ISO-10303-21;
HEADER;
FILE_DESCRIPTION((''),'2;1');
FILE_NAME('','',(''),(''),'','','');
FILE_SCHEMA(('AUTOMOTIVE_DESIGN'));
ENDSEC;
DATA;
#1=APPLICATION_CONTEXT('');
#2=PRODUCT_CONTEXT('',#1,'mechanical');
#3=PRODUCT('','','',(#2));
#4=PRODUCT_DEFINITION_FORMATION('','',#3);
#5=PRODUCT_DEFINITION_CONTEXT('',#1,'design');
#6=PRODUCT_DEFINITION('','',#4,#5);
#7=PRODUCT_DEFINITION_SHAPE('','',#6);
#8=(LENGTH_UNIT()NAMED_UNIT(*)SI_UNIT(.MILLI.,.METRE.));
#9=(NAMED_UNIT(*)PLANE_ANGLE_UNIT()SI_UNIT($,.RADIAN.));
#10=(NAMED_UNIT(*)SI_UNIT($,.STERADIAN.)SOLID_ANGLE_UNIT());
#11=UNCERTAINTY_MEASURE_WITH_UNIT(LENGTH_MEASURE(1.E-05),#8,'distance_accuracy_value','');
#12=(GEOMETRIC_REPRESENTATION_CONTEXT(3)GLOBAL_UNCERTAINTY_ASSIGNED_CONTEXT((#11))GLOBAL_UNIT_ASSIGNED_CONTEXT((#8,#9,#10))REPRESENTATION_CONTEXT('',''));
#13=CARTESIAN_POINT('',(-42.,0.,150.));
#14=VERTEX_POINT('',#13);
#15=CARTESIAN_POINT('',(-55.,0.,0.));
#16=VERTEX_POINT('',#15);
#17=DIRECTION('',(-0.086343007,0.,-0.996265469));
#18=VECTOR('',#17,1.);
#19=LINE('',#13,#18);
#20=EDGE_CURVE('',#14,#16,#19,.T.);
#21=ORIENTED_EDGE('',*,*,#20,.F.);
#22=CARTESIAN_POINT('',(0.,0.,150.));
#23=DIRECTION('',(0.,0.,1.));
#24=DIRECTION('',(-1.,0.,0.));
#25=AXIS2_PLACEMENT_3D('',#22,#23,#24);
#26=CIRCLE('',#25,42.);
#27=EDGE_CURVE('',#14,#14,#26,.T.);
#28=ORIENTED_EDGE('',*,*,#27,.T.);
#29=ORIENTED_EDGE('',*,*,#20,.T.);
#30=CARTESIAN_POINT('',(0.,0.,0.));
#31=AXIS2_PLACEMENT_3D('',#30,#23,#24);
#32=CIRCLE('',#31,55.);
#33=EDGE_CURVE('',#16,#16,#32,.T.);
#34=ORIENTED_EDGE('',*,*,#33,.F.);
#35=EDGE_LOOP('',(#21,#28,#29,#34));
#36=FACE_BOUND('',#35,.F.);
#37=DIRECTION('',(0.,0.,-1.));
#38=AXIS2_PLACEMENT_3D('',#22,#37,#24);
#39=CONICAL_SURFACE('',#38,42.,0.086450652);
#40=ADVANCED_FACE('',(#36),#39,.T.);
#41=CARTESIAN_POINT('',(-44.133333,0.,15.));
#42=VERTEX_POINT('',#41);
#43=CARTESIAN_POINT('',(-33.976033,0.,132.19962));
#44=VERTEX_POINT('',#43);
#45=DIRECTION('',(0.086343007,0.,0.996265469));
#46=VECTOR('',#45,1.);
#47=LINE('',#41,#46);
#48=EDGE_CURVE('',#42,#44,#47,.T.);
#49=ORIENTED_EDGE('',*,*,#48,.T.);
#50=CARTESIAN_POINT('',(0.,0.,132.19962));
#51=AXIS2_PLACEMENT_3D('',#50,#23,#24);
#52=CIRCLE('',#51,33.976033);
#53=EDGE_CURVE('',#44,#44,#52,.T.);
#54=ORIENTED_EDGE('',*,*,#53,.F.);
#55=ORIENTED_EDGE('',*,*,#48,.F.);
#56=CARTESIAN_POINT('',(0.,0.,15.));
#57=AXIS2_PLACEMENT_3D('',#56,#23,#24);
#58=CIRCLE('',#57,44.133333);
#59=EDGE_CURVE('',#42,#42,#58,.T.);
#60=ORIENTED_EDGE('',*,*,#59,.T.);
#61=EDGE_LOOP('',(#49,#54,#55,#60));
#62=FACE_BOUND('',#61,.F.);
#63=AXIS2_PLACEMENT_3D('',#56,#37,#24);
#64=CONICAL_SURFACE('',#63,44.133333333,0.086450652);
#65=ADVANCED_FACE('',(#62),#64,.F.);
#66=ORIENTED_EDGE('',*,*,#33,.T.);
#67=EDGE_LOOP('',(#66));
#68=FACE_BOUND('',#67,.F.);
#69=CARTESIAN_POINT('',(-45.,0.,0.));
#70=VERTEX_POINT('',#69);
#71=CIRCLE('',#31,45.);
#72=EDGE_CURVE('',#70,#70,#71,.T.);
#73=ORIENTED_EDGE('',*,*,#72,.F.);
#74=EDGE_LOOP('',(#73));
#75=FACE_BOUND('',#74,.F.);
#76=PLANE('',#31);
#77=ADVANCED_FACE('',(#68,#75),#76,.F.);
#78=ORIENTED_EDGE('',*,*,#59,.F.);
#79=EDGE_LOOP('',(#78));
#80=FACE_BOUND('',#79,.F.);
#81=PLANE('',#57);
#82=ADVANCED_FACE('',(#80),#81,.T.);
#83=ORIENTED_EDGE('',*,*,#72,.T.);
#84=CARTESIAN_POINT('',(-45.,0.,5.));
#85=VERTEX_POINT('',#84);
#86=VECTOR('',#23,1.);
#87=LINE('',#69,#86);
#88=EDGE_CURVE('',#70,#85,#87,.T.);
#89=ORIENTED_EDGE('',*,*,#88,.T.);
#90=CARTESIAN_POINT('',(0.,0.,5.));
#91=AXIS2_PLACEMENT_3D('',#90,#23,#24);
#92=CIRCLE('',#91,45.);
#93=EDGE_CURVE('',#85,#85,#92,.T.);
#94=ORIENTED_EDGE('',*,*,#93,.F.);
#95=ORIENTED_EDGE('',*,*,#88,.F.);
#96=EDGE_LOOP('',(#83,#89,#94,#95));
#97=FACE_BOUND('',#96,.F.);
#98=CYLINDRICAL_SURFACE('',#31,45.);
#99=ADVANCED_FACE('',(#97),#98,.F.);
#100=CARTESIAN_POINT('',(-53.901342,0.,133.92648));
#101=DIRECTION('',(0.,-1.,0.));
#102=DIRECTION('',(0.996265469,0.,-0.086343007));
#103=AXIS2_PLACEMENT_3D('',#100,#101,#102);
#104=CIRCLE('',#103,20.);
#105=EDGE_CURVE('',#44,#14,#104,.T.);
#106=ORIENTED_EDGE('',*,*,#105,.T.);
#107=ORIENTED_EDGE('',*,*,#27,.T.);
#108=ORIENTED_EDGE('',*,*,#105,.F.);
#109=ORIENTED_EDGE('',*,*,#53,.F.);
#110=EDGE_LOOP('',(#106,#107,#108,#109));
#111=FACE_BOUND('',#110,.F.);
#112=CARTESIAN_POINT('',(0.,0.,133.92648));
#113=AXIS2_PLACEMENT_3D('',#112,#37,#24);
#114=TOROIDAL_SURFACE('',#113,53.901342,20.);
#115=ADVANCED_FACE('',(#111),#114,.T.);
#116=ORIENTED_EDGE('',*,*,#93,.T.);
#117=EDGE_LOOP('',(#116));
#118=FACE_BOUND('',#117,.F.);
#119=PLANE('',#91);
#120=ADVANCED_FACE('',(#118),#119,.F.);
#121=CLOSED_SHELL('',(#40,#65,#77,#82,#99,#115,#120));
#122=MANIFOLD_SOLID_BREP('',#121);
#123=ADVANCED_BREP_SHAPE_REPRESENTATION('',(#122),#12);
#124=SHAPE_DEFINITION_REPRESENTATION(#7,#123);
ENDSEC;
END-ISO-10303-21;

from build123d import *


# Not quite as in the source:
# - a fillet or chamfer that OpenCascade refuses, or shapes differently, is made with other operations: its cross-section is extruded or revolved along the edge and cut away or added


with BuildPart() as f1:
    # F0 (on Front) → F1 (revolve)
    with BuildSketch(Plane.XZ):
        Polygon((-45, 0), (-45, 5), (-44.1333333333, 15), (-32.417820976, 150.1789887381), (-42, 150), (-55, 0), align=None)
        Polygon((-45, 5), (0, 5), (0, 15), (-44.1333333333, 15), align=None)
    revolve(axis=Axis((0, 0, 75), (0, 0, 1)))

    # F2: fillet of radius 20 on 1 edges, made by hand

    # F2_s1 → F2_t2 (revolve, cut)
    with BuildSketch(Plane.XZ):
        with BuildLine():
            ThreePointArc((-33.9760329601, 132.1996196909), (-35.6682042477, 142.1455232835), (-42, 150))
            Line((-42, 150), (-32.417820976, 150.1789887381))
            Line((-32.417820976, 150.1789887381), (-33.9760329601, 132.1996196909))
        make_face()
    revolve(axis=Axis((0, 0, 150.1789887381), (0, 0, 1)), mode=Mode.SUBTRACT)


solid = f1.part
